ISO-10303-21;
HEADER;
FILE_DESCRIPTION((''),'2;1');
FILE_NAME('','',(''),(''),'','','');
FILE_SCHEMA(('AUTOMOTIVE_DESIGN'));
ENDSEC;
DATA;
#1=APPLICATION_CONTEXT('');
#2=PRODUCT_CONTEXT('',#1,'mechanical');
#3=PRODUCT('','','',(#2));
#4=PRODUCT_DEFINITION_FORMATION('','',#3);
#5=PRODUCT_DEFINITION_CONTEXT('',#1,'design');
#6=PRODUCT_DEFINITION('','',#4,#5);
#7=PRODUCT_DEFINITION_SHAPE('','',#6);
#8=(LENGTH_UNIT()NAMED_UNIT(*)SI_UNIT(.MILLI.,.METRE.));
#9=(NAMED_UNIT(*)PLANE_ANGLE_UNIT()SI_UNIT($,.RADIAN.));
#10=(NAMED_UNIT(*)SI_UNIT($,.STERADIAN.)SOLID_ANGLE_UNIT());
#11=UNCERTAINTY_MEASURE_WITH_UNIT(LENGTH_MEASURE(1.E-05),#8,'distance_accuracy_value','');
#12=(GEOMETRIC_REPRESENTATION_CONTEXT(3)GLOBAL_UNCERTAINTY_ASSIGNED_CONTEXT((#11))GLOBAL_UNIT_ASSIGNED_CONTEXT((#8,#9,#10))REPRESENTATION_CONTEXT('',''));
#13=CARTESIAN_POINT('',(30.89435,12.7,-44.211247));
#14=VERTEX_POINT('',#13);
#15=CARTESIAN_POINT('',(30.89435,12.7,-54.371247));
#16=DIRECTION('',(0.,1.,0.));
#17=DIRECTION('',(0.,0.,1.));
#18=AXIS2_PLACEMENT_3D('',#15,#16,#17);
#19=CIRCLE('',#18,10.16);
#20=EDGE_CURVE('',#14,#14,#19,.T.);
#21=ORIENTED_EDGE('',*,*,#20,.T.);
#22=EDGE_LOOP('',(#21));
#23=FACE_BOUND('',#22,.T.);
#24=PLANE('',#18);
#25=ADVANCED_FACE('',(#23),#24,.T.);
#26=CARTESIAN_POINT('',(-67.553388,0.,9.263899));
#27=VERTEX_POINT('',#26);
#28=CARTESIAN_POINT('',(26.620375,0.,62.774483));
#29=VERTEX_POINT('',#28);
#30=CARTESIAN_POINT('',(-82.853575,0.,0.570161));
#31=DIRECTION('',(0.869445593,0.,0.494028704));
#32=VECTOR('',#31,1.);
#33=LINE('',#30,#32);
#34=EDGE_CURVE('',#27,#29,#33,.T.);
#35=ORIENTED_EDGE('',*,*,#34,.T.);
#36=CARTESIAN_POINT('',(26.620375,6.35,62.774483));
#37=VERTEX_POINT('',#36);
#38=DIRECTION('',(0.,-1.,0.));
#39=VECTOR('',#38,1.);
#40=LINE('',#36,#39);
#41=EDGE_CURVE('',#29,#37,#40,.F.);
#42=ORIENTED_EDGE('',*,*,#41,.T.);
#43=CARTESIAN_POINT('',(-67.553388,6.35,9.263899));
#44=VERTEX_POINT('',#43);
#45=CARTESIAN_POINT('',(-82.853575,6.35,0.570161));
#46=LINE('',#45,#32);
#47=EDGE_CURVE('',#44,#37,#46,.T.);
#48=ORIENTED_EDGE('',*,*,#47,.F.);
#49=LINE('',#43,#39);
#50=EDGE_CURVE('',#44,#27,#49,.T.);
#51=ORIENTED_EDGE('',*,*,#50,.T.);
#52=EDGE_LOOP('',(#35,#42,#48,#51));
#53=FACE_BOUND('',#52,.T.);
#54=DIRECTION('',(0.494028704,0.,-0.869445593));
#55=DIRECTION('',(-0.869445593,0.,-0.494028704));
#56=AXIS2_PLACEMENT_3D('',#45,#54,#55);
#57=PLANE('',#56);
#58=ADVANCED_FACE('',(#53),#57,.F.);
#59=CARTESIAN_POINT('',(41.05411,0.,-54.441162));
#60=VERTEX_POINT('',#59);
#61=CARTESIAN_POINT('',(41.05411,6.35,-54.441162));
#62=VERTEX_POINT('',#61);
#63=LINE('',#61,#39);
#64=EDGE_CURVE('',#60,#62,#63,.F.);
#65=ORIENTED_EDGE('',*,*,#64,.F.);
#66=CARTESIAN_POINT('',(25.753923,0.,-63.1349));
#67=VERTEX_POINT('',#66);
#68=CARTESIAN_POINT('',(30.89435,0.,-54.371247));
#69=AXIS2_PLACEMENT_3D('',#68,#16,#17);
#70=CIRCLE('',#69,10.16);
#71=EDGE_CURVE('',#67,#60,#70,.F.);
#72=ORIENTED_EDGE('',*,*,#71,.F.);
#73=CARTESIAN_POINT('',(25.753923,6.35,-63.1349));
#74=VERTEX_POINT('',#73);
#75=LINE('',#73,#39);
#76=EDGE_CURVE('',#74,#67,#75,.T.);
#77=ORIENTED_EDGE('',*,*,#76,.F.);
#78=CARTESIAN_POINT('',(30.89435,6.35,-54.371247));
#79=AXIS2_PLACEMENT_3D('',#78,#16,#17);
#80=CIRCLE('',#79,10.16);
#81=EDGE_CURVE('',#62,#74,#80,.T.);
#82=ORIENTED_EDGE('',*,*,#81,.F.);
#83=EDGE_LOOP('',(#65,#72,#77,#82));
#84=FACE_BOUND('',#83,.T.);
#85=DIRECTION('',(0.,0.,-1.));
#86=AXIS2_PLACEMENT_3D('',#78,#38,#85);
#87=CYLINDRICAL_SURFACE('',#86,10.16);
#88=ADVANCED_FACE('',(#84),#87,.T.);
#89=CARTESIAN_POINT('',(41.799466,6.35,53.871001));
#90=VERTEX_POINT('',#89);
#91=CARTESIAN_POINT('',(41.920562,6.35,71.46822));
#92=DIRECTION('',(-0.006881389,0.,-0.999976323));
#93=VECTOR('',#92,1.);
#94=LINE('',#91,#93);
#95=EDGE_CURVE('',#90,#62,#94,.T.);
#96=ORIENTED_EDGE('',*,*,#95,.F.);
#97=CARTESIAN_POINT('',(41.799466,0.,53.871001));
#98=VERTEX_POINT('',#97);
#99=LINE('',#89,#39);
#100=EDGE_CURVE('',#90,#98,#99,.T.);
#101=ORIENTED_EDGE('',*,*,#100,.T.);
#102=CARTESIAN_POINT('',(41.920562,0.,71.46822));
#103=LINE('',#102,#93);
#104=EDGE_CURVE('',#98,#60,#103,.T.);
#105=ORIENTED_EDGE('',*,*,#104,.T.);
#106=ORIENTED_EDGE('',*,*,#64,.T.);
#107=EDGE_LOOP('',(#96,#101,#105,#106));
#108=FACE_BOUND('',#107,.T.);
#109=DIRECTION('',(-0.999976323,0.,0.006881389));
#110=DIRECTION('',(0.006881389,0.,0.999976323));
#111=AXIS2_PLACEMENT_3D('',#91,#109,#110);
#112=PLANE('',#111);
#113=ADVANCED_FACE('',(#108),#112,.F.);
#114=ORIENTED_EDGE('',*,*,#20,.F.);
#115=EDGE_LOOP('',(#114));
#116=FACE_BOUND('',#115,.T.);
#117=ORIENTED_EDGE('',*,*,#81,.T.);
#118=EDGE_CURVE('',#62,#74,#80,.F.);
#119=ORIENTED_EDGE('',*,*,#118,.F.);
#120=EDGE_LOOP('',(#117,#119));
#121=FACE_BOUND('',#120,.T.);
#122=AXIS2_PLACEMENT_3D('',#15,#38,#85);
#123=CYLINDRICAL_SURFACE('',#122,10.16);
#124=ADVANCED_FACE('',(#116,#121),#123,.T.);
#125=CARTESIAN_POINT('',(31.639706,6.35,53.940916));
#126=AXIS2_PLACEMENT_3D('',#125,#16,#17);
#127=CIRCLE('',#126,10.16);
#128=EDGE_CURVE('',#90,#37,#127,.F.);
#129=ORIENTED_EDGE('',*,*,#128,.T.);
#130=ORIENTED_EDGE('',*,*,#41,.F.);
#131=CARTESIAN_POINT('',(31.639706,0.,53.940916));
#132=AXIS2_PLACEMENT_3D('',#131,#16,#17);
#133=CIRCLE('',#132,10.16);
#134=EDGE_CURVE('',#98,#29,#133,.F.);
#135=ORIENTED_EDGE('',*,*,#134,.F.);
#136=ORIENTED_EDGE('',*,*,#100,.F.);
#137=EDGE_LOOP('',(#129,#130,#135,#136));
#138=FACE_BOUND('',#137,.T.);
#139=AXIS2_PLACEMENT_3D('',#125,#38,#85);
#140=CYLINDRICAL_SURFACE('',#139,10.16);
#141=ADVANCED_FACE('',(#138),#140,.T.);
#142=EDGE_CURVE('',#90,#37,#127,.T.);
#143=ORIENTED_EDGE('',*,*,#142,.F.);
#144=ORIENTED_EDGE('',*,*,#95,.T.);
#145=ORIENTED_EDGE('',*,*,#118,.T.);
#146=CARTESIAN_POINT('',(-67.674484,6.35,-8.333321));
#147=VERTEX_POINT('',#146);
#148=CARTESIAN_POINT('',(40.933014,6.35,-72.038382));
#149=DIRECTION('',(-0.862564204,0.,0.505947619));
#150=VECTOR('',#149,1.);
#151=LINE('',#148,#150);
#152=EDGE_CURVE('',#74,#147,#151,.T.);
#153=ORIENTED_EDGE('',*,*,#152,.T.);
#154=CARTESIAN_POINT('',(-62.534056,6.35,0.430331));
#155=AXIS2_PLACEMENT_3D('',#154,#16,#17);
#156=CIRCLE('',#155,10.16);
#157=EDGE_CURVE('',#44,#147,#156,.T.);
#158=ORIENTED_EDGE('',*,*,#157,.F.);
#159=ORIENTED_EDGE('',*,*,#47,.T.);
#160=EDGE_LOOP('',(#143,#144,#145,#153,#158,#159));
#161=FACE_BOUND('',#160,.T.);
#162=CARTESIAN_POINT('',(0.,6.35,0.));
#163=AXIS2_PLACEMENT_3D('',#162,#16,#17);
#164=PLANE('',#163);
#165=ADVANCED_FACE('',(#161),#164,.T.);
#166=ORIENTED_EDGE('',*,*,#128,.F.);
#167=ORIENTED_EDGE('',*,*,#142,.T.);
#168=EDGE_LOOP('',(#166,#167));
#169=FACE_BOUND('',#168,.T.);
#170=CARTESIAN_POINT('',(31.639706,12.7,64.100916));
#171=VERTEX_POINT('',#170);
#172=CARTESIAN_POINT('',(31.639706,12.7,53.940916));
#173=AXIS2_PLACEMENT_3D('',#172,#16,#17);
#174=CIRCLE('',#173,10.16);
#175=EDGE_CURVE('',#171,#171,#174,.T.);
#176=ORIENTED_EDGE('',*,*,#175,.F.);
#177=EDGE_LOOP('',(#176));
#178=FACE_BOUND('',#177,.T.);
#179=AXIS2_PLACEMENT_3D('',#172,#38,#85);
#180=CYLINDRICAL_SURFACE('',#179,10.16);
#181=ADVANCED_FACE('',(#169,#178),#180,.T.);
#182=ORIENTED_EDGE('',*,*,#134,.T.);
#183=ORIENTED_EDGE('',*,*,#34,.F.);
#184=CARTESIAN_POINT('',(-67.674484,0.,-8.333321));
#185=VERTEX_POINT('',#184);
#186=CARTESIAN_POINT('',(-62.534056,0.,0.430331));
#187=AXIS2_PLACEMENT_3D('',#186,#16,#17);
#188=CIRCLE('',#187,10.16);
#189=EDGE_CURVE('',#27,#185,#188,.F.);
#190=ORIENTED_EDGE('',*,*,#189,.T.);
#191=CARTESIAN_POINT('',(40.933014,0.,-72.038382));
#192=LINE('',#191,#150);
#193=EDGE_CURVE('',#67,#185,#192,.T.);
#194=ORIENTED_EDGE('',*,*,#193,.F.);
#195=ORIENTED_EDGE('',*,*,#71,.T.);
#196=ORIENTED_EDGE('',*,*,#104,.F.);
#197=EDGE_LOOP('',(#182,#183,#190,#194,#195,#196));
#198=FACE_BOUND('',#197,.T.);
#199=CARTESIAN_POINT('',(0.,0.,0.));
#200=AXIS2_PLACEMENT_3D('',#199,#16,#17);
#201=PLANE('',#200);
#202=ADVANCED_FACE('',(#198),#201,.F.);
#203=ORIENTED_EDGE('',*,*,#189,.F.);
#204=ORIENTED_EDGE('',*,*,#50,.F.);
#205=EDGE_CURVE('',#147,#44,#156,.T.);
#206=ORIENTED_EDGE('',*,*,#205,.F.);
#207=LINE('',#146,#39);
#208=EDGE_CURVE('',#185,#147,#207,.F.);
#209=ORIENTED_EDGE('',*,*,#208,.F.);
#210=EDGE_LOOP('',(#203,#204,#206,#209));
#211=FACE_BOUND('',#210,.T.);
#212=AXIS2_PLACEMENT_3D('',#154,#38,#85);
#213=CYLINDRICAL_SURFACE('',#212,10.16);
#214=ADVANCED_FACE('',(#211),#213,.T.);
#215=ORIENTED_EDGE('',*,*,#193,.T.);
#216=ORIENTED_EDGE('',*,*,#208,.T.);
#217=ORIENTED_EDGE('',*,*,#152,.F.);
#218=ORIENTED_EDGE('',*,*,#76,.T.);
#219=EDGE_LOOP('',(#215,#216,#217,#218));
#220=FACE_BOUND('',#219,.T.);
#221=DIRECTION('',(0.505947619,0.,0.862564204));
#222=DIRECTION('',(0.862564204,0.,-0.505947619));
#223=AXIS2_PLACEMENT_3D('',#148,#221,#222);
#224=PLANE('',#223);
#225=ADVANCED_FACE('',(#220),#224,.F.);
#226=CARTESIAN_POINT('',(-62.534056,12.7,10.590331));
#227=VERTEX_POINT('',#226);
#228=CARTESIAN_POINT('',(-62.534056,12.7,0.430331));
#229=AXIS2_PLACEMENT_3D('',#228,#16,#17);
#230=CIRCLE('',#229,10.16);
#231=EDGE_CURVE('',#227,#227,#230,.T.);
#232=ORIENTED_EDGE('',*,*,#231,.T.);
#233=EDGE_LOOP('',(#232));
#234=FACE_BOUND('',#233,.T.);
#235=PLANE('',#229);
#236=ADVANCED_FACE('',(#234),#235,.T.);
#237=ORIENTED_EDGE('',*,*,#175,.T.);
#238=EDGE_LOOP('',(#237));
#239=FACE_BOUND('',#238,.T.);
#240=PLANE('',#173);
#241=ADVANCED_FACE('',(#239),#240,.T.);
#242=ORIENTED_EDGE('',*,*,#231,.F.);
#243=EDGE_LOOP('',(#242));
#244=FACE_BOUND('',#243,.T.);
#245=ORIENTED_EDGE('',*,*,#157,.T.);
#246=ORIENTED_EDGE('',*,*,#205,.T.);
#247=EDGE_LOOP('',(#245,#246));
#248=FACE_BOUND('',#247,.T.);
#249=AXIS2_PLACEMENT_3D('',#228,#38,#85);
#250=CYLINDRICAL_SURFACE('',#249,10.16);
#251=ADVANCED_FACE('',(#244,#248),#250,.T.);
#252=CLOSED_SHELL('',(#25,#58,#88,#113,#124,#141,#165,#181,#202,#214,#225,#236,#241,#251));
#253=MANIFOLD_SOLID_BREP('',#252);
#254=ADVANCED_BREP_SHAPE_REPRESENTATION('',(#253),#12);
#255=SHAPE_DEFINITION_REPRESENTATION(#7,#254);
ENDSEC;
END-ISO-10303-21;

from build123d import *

# Parameters (mm, degrees)
BOSS_EXTRUDE1_DEPTH = 6.35
SKETCH2_R           = 10.16
BOSS_EXTRUDE2_DEPTH = 6.35
FILLET1_R           = 10.16


with BuildPart() as part:
    # Sketch1 → Boss-Extrude1 (new body)
    with BuildSketch(Plane(origin=(0, 0, 0), x_dir=(1, 0, 0), z_dir=(0, 1, 0))):
        Polygon((40.933013594, 72.038381655), (-82.853575358, -0.570161201), (41.920561763, -71.468220453), align=None)
    extrude(amount=BOSS_EXTRUDE1_DEPTH)

    # Sketch2 → Boss-Extrude2 (add)
    with BuildSketch(Plane(origin=(0, 6.35, 0), x_dir=(1, 0, 0), z_dir=(0, 1, 0))):
        with Locations(Location((-62.534056475, -0.430331372, 0), (0, 0, 120.394277672))):
            Circle(SKETCH2_R)
        with Locations(Location((30.894350337, 54.371247195, 0), (0, 0, 120.394277672))):
            Circle(SKETCH2_R)
        with Locations(Location((31.639706138, -53.940915823, 0), (0, 0, 0.394277672))):
            Circle(SKETCH2_R)
    extrude(amount=BOSS_EXTRUDE2_DEPTH)

    # Fillet1
    fillet1_edges = [part.edges().sort_by_distance(p)[0] for p in [
        (40.933013594, 3.175, -72.038381655),
        (41.920561763, 3.175, 71.468220453),
        (-82.853575358, 3.175, 0.570161201),
    ]]
    fillet(fillet1_edges, radius=FILLET1_R - 0.0001)  # a hair under: the kernel refuses the full size


solid = part.part
